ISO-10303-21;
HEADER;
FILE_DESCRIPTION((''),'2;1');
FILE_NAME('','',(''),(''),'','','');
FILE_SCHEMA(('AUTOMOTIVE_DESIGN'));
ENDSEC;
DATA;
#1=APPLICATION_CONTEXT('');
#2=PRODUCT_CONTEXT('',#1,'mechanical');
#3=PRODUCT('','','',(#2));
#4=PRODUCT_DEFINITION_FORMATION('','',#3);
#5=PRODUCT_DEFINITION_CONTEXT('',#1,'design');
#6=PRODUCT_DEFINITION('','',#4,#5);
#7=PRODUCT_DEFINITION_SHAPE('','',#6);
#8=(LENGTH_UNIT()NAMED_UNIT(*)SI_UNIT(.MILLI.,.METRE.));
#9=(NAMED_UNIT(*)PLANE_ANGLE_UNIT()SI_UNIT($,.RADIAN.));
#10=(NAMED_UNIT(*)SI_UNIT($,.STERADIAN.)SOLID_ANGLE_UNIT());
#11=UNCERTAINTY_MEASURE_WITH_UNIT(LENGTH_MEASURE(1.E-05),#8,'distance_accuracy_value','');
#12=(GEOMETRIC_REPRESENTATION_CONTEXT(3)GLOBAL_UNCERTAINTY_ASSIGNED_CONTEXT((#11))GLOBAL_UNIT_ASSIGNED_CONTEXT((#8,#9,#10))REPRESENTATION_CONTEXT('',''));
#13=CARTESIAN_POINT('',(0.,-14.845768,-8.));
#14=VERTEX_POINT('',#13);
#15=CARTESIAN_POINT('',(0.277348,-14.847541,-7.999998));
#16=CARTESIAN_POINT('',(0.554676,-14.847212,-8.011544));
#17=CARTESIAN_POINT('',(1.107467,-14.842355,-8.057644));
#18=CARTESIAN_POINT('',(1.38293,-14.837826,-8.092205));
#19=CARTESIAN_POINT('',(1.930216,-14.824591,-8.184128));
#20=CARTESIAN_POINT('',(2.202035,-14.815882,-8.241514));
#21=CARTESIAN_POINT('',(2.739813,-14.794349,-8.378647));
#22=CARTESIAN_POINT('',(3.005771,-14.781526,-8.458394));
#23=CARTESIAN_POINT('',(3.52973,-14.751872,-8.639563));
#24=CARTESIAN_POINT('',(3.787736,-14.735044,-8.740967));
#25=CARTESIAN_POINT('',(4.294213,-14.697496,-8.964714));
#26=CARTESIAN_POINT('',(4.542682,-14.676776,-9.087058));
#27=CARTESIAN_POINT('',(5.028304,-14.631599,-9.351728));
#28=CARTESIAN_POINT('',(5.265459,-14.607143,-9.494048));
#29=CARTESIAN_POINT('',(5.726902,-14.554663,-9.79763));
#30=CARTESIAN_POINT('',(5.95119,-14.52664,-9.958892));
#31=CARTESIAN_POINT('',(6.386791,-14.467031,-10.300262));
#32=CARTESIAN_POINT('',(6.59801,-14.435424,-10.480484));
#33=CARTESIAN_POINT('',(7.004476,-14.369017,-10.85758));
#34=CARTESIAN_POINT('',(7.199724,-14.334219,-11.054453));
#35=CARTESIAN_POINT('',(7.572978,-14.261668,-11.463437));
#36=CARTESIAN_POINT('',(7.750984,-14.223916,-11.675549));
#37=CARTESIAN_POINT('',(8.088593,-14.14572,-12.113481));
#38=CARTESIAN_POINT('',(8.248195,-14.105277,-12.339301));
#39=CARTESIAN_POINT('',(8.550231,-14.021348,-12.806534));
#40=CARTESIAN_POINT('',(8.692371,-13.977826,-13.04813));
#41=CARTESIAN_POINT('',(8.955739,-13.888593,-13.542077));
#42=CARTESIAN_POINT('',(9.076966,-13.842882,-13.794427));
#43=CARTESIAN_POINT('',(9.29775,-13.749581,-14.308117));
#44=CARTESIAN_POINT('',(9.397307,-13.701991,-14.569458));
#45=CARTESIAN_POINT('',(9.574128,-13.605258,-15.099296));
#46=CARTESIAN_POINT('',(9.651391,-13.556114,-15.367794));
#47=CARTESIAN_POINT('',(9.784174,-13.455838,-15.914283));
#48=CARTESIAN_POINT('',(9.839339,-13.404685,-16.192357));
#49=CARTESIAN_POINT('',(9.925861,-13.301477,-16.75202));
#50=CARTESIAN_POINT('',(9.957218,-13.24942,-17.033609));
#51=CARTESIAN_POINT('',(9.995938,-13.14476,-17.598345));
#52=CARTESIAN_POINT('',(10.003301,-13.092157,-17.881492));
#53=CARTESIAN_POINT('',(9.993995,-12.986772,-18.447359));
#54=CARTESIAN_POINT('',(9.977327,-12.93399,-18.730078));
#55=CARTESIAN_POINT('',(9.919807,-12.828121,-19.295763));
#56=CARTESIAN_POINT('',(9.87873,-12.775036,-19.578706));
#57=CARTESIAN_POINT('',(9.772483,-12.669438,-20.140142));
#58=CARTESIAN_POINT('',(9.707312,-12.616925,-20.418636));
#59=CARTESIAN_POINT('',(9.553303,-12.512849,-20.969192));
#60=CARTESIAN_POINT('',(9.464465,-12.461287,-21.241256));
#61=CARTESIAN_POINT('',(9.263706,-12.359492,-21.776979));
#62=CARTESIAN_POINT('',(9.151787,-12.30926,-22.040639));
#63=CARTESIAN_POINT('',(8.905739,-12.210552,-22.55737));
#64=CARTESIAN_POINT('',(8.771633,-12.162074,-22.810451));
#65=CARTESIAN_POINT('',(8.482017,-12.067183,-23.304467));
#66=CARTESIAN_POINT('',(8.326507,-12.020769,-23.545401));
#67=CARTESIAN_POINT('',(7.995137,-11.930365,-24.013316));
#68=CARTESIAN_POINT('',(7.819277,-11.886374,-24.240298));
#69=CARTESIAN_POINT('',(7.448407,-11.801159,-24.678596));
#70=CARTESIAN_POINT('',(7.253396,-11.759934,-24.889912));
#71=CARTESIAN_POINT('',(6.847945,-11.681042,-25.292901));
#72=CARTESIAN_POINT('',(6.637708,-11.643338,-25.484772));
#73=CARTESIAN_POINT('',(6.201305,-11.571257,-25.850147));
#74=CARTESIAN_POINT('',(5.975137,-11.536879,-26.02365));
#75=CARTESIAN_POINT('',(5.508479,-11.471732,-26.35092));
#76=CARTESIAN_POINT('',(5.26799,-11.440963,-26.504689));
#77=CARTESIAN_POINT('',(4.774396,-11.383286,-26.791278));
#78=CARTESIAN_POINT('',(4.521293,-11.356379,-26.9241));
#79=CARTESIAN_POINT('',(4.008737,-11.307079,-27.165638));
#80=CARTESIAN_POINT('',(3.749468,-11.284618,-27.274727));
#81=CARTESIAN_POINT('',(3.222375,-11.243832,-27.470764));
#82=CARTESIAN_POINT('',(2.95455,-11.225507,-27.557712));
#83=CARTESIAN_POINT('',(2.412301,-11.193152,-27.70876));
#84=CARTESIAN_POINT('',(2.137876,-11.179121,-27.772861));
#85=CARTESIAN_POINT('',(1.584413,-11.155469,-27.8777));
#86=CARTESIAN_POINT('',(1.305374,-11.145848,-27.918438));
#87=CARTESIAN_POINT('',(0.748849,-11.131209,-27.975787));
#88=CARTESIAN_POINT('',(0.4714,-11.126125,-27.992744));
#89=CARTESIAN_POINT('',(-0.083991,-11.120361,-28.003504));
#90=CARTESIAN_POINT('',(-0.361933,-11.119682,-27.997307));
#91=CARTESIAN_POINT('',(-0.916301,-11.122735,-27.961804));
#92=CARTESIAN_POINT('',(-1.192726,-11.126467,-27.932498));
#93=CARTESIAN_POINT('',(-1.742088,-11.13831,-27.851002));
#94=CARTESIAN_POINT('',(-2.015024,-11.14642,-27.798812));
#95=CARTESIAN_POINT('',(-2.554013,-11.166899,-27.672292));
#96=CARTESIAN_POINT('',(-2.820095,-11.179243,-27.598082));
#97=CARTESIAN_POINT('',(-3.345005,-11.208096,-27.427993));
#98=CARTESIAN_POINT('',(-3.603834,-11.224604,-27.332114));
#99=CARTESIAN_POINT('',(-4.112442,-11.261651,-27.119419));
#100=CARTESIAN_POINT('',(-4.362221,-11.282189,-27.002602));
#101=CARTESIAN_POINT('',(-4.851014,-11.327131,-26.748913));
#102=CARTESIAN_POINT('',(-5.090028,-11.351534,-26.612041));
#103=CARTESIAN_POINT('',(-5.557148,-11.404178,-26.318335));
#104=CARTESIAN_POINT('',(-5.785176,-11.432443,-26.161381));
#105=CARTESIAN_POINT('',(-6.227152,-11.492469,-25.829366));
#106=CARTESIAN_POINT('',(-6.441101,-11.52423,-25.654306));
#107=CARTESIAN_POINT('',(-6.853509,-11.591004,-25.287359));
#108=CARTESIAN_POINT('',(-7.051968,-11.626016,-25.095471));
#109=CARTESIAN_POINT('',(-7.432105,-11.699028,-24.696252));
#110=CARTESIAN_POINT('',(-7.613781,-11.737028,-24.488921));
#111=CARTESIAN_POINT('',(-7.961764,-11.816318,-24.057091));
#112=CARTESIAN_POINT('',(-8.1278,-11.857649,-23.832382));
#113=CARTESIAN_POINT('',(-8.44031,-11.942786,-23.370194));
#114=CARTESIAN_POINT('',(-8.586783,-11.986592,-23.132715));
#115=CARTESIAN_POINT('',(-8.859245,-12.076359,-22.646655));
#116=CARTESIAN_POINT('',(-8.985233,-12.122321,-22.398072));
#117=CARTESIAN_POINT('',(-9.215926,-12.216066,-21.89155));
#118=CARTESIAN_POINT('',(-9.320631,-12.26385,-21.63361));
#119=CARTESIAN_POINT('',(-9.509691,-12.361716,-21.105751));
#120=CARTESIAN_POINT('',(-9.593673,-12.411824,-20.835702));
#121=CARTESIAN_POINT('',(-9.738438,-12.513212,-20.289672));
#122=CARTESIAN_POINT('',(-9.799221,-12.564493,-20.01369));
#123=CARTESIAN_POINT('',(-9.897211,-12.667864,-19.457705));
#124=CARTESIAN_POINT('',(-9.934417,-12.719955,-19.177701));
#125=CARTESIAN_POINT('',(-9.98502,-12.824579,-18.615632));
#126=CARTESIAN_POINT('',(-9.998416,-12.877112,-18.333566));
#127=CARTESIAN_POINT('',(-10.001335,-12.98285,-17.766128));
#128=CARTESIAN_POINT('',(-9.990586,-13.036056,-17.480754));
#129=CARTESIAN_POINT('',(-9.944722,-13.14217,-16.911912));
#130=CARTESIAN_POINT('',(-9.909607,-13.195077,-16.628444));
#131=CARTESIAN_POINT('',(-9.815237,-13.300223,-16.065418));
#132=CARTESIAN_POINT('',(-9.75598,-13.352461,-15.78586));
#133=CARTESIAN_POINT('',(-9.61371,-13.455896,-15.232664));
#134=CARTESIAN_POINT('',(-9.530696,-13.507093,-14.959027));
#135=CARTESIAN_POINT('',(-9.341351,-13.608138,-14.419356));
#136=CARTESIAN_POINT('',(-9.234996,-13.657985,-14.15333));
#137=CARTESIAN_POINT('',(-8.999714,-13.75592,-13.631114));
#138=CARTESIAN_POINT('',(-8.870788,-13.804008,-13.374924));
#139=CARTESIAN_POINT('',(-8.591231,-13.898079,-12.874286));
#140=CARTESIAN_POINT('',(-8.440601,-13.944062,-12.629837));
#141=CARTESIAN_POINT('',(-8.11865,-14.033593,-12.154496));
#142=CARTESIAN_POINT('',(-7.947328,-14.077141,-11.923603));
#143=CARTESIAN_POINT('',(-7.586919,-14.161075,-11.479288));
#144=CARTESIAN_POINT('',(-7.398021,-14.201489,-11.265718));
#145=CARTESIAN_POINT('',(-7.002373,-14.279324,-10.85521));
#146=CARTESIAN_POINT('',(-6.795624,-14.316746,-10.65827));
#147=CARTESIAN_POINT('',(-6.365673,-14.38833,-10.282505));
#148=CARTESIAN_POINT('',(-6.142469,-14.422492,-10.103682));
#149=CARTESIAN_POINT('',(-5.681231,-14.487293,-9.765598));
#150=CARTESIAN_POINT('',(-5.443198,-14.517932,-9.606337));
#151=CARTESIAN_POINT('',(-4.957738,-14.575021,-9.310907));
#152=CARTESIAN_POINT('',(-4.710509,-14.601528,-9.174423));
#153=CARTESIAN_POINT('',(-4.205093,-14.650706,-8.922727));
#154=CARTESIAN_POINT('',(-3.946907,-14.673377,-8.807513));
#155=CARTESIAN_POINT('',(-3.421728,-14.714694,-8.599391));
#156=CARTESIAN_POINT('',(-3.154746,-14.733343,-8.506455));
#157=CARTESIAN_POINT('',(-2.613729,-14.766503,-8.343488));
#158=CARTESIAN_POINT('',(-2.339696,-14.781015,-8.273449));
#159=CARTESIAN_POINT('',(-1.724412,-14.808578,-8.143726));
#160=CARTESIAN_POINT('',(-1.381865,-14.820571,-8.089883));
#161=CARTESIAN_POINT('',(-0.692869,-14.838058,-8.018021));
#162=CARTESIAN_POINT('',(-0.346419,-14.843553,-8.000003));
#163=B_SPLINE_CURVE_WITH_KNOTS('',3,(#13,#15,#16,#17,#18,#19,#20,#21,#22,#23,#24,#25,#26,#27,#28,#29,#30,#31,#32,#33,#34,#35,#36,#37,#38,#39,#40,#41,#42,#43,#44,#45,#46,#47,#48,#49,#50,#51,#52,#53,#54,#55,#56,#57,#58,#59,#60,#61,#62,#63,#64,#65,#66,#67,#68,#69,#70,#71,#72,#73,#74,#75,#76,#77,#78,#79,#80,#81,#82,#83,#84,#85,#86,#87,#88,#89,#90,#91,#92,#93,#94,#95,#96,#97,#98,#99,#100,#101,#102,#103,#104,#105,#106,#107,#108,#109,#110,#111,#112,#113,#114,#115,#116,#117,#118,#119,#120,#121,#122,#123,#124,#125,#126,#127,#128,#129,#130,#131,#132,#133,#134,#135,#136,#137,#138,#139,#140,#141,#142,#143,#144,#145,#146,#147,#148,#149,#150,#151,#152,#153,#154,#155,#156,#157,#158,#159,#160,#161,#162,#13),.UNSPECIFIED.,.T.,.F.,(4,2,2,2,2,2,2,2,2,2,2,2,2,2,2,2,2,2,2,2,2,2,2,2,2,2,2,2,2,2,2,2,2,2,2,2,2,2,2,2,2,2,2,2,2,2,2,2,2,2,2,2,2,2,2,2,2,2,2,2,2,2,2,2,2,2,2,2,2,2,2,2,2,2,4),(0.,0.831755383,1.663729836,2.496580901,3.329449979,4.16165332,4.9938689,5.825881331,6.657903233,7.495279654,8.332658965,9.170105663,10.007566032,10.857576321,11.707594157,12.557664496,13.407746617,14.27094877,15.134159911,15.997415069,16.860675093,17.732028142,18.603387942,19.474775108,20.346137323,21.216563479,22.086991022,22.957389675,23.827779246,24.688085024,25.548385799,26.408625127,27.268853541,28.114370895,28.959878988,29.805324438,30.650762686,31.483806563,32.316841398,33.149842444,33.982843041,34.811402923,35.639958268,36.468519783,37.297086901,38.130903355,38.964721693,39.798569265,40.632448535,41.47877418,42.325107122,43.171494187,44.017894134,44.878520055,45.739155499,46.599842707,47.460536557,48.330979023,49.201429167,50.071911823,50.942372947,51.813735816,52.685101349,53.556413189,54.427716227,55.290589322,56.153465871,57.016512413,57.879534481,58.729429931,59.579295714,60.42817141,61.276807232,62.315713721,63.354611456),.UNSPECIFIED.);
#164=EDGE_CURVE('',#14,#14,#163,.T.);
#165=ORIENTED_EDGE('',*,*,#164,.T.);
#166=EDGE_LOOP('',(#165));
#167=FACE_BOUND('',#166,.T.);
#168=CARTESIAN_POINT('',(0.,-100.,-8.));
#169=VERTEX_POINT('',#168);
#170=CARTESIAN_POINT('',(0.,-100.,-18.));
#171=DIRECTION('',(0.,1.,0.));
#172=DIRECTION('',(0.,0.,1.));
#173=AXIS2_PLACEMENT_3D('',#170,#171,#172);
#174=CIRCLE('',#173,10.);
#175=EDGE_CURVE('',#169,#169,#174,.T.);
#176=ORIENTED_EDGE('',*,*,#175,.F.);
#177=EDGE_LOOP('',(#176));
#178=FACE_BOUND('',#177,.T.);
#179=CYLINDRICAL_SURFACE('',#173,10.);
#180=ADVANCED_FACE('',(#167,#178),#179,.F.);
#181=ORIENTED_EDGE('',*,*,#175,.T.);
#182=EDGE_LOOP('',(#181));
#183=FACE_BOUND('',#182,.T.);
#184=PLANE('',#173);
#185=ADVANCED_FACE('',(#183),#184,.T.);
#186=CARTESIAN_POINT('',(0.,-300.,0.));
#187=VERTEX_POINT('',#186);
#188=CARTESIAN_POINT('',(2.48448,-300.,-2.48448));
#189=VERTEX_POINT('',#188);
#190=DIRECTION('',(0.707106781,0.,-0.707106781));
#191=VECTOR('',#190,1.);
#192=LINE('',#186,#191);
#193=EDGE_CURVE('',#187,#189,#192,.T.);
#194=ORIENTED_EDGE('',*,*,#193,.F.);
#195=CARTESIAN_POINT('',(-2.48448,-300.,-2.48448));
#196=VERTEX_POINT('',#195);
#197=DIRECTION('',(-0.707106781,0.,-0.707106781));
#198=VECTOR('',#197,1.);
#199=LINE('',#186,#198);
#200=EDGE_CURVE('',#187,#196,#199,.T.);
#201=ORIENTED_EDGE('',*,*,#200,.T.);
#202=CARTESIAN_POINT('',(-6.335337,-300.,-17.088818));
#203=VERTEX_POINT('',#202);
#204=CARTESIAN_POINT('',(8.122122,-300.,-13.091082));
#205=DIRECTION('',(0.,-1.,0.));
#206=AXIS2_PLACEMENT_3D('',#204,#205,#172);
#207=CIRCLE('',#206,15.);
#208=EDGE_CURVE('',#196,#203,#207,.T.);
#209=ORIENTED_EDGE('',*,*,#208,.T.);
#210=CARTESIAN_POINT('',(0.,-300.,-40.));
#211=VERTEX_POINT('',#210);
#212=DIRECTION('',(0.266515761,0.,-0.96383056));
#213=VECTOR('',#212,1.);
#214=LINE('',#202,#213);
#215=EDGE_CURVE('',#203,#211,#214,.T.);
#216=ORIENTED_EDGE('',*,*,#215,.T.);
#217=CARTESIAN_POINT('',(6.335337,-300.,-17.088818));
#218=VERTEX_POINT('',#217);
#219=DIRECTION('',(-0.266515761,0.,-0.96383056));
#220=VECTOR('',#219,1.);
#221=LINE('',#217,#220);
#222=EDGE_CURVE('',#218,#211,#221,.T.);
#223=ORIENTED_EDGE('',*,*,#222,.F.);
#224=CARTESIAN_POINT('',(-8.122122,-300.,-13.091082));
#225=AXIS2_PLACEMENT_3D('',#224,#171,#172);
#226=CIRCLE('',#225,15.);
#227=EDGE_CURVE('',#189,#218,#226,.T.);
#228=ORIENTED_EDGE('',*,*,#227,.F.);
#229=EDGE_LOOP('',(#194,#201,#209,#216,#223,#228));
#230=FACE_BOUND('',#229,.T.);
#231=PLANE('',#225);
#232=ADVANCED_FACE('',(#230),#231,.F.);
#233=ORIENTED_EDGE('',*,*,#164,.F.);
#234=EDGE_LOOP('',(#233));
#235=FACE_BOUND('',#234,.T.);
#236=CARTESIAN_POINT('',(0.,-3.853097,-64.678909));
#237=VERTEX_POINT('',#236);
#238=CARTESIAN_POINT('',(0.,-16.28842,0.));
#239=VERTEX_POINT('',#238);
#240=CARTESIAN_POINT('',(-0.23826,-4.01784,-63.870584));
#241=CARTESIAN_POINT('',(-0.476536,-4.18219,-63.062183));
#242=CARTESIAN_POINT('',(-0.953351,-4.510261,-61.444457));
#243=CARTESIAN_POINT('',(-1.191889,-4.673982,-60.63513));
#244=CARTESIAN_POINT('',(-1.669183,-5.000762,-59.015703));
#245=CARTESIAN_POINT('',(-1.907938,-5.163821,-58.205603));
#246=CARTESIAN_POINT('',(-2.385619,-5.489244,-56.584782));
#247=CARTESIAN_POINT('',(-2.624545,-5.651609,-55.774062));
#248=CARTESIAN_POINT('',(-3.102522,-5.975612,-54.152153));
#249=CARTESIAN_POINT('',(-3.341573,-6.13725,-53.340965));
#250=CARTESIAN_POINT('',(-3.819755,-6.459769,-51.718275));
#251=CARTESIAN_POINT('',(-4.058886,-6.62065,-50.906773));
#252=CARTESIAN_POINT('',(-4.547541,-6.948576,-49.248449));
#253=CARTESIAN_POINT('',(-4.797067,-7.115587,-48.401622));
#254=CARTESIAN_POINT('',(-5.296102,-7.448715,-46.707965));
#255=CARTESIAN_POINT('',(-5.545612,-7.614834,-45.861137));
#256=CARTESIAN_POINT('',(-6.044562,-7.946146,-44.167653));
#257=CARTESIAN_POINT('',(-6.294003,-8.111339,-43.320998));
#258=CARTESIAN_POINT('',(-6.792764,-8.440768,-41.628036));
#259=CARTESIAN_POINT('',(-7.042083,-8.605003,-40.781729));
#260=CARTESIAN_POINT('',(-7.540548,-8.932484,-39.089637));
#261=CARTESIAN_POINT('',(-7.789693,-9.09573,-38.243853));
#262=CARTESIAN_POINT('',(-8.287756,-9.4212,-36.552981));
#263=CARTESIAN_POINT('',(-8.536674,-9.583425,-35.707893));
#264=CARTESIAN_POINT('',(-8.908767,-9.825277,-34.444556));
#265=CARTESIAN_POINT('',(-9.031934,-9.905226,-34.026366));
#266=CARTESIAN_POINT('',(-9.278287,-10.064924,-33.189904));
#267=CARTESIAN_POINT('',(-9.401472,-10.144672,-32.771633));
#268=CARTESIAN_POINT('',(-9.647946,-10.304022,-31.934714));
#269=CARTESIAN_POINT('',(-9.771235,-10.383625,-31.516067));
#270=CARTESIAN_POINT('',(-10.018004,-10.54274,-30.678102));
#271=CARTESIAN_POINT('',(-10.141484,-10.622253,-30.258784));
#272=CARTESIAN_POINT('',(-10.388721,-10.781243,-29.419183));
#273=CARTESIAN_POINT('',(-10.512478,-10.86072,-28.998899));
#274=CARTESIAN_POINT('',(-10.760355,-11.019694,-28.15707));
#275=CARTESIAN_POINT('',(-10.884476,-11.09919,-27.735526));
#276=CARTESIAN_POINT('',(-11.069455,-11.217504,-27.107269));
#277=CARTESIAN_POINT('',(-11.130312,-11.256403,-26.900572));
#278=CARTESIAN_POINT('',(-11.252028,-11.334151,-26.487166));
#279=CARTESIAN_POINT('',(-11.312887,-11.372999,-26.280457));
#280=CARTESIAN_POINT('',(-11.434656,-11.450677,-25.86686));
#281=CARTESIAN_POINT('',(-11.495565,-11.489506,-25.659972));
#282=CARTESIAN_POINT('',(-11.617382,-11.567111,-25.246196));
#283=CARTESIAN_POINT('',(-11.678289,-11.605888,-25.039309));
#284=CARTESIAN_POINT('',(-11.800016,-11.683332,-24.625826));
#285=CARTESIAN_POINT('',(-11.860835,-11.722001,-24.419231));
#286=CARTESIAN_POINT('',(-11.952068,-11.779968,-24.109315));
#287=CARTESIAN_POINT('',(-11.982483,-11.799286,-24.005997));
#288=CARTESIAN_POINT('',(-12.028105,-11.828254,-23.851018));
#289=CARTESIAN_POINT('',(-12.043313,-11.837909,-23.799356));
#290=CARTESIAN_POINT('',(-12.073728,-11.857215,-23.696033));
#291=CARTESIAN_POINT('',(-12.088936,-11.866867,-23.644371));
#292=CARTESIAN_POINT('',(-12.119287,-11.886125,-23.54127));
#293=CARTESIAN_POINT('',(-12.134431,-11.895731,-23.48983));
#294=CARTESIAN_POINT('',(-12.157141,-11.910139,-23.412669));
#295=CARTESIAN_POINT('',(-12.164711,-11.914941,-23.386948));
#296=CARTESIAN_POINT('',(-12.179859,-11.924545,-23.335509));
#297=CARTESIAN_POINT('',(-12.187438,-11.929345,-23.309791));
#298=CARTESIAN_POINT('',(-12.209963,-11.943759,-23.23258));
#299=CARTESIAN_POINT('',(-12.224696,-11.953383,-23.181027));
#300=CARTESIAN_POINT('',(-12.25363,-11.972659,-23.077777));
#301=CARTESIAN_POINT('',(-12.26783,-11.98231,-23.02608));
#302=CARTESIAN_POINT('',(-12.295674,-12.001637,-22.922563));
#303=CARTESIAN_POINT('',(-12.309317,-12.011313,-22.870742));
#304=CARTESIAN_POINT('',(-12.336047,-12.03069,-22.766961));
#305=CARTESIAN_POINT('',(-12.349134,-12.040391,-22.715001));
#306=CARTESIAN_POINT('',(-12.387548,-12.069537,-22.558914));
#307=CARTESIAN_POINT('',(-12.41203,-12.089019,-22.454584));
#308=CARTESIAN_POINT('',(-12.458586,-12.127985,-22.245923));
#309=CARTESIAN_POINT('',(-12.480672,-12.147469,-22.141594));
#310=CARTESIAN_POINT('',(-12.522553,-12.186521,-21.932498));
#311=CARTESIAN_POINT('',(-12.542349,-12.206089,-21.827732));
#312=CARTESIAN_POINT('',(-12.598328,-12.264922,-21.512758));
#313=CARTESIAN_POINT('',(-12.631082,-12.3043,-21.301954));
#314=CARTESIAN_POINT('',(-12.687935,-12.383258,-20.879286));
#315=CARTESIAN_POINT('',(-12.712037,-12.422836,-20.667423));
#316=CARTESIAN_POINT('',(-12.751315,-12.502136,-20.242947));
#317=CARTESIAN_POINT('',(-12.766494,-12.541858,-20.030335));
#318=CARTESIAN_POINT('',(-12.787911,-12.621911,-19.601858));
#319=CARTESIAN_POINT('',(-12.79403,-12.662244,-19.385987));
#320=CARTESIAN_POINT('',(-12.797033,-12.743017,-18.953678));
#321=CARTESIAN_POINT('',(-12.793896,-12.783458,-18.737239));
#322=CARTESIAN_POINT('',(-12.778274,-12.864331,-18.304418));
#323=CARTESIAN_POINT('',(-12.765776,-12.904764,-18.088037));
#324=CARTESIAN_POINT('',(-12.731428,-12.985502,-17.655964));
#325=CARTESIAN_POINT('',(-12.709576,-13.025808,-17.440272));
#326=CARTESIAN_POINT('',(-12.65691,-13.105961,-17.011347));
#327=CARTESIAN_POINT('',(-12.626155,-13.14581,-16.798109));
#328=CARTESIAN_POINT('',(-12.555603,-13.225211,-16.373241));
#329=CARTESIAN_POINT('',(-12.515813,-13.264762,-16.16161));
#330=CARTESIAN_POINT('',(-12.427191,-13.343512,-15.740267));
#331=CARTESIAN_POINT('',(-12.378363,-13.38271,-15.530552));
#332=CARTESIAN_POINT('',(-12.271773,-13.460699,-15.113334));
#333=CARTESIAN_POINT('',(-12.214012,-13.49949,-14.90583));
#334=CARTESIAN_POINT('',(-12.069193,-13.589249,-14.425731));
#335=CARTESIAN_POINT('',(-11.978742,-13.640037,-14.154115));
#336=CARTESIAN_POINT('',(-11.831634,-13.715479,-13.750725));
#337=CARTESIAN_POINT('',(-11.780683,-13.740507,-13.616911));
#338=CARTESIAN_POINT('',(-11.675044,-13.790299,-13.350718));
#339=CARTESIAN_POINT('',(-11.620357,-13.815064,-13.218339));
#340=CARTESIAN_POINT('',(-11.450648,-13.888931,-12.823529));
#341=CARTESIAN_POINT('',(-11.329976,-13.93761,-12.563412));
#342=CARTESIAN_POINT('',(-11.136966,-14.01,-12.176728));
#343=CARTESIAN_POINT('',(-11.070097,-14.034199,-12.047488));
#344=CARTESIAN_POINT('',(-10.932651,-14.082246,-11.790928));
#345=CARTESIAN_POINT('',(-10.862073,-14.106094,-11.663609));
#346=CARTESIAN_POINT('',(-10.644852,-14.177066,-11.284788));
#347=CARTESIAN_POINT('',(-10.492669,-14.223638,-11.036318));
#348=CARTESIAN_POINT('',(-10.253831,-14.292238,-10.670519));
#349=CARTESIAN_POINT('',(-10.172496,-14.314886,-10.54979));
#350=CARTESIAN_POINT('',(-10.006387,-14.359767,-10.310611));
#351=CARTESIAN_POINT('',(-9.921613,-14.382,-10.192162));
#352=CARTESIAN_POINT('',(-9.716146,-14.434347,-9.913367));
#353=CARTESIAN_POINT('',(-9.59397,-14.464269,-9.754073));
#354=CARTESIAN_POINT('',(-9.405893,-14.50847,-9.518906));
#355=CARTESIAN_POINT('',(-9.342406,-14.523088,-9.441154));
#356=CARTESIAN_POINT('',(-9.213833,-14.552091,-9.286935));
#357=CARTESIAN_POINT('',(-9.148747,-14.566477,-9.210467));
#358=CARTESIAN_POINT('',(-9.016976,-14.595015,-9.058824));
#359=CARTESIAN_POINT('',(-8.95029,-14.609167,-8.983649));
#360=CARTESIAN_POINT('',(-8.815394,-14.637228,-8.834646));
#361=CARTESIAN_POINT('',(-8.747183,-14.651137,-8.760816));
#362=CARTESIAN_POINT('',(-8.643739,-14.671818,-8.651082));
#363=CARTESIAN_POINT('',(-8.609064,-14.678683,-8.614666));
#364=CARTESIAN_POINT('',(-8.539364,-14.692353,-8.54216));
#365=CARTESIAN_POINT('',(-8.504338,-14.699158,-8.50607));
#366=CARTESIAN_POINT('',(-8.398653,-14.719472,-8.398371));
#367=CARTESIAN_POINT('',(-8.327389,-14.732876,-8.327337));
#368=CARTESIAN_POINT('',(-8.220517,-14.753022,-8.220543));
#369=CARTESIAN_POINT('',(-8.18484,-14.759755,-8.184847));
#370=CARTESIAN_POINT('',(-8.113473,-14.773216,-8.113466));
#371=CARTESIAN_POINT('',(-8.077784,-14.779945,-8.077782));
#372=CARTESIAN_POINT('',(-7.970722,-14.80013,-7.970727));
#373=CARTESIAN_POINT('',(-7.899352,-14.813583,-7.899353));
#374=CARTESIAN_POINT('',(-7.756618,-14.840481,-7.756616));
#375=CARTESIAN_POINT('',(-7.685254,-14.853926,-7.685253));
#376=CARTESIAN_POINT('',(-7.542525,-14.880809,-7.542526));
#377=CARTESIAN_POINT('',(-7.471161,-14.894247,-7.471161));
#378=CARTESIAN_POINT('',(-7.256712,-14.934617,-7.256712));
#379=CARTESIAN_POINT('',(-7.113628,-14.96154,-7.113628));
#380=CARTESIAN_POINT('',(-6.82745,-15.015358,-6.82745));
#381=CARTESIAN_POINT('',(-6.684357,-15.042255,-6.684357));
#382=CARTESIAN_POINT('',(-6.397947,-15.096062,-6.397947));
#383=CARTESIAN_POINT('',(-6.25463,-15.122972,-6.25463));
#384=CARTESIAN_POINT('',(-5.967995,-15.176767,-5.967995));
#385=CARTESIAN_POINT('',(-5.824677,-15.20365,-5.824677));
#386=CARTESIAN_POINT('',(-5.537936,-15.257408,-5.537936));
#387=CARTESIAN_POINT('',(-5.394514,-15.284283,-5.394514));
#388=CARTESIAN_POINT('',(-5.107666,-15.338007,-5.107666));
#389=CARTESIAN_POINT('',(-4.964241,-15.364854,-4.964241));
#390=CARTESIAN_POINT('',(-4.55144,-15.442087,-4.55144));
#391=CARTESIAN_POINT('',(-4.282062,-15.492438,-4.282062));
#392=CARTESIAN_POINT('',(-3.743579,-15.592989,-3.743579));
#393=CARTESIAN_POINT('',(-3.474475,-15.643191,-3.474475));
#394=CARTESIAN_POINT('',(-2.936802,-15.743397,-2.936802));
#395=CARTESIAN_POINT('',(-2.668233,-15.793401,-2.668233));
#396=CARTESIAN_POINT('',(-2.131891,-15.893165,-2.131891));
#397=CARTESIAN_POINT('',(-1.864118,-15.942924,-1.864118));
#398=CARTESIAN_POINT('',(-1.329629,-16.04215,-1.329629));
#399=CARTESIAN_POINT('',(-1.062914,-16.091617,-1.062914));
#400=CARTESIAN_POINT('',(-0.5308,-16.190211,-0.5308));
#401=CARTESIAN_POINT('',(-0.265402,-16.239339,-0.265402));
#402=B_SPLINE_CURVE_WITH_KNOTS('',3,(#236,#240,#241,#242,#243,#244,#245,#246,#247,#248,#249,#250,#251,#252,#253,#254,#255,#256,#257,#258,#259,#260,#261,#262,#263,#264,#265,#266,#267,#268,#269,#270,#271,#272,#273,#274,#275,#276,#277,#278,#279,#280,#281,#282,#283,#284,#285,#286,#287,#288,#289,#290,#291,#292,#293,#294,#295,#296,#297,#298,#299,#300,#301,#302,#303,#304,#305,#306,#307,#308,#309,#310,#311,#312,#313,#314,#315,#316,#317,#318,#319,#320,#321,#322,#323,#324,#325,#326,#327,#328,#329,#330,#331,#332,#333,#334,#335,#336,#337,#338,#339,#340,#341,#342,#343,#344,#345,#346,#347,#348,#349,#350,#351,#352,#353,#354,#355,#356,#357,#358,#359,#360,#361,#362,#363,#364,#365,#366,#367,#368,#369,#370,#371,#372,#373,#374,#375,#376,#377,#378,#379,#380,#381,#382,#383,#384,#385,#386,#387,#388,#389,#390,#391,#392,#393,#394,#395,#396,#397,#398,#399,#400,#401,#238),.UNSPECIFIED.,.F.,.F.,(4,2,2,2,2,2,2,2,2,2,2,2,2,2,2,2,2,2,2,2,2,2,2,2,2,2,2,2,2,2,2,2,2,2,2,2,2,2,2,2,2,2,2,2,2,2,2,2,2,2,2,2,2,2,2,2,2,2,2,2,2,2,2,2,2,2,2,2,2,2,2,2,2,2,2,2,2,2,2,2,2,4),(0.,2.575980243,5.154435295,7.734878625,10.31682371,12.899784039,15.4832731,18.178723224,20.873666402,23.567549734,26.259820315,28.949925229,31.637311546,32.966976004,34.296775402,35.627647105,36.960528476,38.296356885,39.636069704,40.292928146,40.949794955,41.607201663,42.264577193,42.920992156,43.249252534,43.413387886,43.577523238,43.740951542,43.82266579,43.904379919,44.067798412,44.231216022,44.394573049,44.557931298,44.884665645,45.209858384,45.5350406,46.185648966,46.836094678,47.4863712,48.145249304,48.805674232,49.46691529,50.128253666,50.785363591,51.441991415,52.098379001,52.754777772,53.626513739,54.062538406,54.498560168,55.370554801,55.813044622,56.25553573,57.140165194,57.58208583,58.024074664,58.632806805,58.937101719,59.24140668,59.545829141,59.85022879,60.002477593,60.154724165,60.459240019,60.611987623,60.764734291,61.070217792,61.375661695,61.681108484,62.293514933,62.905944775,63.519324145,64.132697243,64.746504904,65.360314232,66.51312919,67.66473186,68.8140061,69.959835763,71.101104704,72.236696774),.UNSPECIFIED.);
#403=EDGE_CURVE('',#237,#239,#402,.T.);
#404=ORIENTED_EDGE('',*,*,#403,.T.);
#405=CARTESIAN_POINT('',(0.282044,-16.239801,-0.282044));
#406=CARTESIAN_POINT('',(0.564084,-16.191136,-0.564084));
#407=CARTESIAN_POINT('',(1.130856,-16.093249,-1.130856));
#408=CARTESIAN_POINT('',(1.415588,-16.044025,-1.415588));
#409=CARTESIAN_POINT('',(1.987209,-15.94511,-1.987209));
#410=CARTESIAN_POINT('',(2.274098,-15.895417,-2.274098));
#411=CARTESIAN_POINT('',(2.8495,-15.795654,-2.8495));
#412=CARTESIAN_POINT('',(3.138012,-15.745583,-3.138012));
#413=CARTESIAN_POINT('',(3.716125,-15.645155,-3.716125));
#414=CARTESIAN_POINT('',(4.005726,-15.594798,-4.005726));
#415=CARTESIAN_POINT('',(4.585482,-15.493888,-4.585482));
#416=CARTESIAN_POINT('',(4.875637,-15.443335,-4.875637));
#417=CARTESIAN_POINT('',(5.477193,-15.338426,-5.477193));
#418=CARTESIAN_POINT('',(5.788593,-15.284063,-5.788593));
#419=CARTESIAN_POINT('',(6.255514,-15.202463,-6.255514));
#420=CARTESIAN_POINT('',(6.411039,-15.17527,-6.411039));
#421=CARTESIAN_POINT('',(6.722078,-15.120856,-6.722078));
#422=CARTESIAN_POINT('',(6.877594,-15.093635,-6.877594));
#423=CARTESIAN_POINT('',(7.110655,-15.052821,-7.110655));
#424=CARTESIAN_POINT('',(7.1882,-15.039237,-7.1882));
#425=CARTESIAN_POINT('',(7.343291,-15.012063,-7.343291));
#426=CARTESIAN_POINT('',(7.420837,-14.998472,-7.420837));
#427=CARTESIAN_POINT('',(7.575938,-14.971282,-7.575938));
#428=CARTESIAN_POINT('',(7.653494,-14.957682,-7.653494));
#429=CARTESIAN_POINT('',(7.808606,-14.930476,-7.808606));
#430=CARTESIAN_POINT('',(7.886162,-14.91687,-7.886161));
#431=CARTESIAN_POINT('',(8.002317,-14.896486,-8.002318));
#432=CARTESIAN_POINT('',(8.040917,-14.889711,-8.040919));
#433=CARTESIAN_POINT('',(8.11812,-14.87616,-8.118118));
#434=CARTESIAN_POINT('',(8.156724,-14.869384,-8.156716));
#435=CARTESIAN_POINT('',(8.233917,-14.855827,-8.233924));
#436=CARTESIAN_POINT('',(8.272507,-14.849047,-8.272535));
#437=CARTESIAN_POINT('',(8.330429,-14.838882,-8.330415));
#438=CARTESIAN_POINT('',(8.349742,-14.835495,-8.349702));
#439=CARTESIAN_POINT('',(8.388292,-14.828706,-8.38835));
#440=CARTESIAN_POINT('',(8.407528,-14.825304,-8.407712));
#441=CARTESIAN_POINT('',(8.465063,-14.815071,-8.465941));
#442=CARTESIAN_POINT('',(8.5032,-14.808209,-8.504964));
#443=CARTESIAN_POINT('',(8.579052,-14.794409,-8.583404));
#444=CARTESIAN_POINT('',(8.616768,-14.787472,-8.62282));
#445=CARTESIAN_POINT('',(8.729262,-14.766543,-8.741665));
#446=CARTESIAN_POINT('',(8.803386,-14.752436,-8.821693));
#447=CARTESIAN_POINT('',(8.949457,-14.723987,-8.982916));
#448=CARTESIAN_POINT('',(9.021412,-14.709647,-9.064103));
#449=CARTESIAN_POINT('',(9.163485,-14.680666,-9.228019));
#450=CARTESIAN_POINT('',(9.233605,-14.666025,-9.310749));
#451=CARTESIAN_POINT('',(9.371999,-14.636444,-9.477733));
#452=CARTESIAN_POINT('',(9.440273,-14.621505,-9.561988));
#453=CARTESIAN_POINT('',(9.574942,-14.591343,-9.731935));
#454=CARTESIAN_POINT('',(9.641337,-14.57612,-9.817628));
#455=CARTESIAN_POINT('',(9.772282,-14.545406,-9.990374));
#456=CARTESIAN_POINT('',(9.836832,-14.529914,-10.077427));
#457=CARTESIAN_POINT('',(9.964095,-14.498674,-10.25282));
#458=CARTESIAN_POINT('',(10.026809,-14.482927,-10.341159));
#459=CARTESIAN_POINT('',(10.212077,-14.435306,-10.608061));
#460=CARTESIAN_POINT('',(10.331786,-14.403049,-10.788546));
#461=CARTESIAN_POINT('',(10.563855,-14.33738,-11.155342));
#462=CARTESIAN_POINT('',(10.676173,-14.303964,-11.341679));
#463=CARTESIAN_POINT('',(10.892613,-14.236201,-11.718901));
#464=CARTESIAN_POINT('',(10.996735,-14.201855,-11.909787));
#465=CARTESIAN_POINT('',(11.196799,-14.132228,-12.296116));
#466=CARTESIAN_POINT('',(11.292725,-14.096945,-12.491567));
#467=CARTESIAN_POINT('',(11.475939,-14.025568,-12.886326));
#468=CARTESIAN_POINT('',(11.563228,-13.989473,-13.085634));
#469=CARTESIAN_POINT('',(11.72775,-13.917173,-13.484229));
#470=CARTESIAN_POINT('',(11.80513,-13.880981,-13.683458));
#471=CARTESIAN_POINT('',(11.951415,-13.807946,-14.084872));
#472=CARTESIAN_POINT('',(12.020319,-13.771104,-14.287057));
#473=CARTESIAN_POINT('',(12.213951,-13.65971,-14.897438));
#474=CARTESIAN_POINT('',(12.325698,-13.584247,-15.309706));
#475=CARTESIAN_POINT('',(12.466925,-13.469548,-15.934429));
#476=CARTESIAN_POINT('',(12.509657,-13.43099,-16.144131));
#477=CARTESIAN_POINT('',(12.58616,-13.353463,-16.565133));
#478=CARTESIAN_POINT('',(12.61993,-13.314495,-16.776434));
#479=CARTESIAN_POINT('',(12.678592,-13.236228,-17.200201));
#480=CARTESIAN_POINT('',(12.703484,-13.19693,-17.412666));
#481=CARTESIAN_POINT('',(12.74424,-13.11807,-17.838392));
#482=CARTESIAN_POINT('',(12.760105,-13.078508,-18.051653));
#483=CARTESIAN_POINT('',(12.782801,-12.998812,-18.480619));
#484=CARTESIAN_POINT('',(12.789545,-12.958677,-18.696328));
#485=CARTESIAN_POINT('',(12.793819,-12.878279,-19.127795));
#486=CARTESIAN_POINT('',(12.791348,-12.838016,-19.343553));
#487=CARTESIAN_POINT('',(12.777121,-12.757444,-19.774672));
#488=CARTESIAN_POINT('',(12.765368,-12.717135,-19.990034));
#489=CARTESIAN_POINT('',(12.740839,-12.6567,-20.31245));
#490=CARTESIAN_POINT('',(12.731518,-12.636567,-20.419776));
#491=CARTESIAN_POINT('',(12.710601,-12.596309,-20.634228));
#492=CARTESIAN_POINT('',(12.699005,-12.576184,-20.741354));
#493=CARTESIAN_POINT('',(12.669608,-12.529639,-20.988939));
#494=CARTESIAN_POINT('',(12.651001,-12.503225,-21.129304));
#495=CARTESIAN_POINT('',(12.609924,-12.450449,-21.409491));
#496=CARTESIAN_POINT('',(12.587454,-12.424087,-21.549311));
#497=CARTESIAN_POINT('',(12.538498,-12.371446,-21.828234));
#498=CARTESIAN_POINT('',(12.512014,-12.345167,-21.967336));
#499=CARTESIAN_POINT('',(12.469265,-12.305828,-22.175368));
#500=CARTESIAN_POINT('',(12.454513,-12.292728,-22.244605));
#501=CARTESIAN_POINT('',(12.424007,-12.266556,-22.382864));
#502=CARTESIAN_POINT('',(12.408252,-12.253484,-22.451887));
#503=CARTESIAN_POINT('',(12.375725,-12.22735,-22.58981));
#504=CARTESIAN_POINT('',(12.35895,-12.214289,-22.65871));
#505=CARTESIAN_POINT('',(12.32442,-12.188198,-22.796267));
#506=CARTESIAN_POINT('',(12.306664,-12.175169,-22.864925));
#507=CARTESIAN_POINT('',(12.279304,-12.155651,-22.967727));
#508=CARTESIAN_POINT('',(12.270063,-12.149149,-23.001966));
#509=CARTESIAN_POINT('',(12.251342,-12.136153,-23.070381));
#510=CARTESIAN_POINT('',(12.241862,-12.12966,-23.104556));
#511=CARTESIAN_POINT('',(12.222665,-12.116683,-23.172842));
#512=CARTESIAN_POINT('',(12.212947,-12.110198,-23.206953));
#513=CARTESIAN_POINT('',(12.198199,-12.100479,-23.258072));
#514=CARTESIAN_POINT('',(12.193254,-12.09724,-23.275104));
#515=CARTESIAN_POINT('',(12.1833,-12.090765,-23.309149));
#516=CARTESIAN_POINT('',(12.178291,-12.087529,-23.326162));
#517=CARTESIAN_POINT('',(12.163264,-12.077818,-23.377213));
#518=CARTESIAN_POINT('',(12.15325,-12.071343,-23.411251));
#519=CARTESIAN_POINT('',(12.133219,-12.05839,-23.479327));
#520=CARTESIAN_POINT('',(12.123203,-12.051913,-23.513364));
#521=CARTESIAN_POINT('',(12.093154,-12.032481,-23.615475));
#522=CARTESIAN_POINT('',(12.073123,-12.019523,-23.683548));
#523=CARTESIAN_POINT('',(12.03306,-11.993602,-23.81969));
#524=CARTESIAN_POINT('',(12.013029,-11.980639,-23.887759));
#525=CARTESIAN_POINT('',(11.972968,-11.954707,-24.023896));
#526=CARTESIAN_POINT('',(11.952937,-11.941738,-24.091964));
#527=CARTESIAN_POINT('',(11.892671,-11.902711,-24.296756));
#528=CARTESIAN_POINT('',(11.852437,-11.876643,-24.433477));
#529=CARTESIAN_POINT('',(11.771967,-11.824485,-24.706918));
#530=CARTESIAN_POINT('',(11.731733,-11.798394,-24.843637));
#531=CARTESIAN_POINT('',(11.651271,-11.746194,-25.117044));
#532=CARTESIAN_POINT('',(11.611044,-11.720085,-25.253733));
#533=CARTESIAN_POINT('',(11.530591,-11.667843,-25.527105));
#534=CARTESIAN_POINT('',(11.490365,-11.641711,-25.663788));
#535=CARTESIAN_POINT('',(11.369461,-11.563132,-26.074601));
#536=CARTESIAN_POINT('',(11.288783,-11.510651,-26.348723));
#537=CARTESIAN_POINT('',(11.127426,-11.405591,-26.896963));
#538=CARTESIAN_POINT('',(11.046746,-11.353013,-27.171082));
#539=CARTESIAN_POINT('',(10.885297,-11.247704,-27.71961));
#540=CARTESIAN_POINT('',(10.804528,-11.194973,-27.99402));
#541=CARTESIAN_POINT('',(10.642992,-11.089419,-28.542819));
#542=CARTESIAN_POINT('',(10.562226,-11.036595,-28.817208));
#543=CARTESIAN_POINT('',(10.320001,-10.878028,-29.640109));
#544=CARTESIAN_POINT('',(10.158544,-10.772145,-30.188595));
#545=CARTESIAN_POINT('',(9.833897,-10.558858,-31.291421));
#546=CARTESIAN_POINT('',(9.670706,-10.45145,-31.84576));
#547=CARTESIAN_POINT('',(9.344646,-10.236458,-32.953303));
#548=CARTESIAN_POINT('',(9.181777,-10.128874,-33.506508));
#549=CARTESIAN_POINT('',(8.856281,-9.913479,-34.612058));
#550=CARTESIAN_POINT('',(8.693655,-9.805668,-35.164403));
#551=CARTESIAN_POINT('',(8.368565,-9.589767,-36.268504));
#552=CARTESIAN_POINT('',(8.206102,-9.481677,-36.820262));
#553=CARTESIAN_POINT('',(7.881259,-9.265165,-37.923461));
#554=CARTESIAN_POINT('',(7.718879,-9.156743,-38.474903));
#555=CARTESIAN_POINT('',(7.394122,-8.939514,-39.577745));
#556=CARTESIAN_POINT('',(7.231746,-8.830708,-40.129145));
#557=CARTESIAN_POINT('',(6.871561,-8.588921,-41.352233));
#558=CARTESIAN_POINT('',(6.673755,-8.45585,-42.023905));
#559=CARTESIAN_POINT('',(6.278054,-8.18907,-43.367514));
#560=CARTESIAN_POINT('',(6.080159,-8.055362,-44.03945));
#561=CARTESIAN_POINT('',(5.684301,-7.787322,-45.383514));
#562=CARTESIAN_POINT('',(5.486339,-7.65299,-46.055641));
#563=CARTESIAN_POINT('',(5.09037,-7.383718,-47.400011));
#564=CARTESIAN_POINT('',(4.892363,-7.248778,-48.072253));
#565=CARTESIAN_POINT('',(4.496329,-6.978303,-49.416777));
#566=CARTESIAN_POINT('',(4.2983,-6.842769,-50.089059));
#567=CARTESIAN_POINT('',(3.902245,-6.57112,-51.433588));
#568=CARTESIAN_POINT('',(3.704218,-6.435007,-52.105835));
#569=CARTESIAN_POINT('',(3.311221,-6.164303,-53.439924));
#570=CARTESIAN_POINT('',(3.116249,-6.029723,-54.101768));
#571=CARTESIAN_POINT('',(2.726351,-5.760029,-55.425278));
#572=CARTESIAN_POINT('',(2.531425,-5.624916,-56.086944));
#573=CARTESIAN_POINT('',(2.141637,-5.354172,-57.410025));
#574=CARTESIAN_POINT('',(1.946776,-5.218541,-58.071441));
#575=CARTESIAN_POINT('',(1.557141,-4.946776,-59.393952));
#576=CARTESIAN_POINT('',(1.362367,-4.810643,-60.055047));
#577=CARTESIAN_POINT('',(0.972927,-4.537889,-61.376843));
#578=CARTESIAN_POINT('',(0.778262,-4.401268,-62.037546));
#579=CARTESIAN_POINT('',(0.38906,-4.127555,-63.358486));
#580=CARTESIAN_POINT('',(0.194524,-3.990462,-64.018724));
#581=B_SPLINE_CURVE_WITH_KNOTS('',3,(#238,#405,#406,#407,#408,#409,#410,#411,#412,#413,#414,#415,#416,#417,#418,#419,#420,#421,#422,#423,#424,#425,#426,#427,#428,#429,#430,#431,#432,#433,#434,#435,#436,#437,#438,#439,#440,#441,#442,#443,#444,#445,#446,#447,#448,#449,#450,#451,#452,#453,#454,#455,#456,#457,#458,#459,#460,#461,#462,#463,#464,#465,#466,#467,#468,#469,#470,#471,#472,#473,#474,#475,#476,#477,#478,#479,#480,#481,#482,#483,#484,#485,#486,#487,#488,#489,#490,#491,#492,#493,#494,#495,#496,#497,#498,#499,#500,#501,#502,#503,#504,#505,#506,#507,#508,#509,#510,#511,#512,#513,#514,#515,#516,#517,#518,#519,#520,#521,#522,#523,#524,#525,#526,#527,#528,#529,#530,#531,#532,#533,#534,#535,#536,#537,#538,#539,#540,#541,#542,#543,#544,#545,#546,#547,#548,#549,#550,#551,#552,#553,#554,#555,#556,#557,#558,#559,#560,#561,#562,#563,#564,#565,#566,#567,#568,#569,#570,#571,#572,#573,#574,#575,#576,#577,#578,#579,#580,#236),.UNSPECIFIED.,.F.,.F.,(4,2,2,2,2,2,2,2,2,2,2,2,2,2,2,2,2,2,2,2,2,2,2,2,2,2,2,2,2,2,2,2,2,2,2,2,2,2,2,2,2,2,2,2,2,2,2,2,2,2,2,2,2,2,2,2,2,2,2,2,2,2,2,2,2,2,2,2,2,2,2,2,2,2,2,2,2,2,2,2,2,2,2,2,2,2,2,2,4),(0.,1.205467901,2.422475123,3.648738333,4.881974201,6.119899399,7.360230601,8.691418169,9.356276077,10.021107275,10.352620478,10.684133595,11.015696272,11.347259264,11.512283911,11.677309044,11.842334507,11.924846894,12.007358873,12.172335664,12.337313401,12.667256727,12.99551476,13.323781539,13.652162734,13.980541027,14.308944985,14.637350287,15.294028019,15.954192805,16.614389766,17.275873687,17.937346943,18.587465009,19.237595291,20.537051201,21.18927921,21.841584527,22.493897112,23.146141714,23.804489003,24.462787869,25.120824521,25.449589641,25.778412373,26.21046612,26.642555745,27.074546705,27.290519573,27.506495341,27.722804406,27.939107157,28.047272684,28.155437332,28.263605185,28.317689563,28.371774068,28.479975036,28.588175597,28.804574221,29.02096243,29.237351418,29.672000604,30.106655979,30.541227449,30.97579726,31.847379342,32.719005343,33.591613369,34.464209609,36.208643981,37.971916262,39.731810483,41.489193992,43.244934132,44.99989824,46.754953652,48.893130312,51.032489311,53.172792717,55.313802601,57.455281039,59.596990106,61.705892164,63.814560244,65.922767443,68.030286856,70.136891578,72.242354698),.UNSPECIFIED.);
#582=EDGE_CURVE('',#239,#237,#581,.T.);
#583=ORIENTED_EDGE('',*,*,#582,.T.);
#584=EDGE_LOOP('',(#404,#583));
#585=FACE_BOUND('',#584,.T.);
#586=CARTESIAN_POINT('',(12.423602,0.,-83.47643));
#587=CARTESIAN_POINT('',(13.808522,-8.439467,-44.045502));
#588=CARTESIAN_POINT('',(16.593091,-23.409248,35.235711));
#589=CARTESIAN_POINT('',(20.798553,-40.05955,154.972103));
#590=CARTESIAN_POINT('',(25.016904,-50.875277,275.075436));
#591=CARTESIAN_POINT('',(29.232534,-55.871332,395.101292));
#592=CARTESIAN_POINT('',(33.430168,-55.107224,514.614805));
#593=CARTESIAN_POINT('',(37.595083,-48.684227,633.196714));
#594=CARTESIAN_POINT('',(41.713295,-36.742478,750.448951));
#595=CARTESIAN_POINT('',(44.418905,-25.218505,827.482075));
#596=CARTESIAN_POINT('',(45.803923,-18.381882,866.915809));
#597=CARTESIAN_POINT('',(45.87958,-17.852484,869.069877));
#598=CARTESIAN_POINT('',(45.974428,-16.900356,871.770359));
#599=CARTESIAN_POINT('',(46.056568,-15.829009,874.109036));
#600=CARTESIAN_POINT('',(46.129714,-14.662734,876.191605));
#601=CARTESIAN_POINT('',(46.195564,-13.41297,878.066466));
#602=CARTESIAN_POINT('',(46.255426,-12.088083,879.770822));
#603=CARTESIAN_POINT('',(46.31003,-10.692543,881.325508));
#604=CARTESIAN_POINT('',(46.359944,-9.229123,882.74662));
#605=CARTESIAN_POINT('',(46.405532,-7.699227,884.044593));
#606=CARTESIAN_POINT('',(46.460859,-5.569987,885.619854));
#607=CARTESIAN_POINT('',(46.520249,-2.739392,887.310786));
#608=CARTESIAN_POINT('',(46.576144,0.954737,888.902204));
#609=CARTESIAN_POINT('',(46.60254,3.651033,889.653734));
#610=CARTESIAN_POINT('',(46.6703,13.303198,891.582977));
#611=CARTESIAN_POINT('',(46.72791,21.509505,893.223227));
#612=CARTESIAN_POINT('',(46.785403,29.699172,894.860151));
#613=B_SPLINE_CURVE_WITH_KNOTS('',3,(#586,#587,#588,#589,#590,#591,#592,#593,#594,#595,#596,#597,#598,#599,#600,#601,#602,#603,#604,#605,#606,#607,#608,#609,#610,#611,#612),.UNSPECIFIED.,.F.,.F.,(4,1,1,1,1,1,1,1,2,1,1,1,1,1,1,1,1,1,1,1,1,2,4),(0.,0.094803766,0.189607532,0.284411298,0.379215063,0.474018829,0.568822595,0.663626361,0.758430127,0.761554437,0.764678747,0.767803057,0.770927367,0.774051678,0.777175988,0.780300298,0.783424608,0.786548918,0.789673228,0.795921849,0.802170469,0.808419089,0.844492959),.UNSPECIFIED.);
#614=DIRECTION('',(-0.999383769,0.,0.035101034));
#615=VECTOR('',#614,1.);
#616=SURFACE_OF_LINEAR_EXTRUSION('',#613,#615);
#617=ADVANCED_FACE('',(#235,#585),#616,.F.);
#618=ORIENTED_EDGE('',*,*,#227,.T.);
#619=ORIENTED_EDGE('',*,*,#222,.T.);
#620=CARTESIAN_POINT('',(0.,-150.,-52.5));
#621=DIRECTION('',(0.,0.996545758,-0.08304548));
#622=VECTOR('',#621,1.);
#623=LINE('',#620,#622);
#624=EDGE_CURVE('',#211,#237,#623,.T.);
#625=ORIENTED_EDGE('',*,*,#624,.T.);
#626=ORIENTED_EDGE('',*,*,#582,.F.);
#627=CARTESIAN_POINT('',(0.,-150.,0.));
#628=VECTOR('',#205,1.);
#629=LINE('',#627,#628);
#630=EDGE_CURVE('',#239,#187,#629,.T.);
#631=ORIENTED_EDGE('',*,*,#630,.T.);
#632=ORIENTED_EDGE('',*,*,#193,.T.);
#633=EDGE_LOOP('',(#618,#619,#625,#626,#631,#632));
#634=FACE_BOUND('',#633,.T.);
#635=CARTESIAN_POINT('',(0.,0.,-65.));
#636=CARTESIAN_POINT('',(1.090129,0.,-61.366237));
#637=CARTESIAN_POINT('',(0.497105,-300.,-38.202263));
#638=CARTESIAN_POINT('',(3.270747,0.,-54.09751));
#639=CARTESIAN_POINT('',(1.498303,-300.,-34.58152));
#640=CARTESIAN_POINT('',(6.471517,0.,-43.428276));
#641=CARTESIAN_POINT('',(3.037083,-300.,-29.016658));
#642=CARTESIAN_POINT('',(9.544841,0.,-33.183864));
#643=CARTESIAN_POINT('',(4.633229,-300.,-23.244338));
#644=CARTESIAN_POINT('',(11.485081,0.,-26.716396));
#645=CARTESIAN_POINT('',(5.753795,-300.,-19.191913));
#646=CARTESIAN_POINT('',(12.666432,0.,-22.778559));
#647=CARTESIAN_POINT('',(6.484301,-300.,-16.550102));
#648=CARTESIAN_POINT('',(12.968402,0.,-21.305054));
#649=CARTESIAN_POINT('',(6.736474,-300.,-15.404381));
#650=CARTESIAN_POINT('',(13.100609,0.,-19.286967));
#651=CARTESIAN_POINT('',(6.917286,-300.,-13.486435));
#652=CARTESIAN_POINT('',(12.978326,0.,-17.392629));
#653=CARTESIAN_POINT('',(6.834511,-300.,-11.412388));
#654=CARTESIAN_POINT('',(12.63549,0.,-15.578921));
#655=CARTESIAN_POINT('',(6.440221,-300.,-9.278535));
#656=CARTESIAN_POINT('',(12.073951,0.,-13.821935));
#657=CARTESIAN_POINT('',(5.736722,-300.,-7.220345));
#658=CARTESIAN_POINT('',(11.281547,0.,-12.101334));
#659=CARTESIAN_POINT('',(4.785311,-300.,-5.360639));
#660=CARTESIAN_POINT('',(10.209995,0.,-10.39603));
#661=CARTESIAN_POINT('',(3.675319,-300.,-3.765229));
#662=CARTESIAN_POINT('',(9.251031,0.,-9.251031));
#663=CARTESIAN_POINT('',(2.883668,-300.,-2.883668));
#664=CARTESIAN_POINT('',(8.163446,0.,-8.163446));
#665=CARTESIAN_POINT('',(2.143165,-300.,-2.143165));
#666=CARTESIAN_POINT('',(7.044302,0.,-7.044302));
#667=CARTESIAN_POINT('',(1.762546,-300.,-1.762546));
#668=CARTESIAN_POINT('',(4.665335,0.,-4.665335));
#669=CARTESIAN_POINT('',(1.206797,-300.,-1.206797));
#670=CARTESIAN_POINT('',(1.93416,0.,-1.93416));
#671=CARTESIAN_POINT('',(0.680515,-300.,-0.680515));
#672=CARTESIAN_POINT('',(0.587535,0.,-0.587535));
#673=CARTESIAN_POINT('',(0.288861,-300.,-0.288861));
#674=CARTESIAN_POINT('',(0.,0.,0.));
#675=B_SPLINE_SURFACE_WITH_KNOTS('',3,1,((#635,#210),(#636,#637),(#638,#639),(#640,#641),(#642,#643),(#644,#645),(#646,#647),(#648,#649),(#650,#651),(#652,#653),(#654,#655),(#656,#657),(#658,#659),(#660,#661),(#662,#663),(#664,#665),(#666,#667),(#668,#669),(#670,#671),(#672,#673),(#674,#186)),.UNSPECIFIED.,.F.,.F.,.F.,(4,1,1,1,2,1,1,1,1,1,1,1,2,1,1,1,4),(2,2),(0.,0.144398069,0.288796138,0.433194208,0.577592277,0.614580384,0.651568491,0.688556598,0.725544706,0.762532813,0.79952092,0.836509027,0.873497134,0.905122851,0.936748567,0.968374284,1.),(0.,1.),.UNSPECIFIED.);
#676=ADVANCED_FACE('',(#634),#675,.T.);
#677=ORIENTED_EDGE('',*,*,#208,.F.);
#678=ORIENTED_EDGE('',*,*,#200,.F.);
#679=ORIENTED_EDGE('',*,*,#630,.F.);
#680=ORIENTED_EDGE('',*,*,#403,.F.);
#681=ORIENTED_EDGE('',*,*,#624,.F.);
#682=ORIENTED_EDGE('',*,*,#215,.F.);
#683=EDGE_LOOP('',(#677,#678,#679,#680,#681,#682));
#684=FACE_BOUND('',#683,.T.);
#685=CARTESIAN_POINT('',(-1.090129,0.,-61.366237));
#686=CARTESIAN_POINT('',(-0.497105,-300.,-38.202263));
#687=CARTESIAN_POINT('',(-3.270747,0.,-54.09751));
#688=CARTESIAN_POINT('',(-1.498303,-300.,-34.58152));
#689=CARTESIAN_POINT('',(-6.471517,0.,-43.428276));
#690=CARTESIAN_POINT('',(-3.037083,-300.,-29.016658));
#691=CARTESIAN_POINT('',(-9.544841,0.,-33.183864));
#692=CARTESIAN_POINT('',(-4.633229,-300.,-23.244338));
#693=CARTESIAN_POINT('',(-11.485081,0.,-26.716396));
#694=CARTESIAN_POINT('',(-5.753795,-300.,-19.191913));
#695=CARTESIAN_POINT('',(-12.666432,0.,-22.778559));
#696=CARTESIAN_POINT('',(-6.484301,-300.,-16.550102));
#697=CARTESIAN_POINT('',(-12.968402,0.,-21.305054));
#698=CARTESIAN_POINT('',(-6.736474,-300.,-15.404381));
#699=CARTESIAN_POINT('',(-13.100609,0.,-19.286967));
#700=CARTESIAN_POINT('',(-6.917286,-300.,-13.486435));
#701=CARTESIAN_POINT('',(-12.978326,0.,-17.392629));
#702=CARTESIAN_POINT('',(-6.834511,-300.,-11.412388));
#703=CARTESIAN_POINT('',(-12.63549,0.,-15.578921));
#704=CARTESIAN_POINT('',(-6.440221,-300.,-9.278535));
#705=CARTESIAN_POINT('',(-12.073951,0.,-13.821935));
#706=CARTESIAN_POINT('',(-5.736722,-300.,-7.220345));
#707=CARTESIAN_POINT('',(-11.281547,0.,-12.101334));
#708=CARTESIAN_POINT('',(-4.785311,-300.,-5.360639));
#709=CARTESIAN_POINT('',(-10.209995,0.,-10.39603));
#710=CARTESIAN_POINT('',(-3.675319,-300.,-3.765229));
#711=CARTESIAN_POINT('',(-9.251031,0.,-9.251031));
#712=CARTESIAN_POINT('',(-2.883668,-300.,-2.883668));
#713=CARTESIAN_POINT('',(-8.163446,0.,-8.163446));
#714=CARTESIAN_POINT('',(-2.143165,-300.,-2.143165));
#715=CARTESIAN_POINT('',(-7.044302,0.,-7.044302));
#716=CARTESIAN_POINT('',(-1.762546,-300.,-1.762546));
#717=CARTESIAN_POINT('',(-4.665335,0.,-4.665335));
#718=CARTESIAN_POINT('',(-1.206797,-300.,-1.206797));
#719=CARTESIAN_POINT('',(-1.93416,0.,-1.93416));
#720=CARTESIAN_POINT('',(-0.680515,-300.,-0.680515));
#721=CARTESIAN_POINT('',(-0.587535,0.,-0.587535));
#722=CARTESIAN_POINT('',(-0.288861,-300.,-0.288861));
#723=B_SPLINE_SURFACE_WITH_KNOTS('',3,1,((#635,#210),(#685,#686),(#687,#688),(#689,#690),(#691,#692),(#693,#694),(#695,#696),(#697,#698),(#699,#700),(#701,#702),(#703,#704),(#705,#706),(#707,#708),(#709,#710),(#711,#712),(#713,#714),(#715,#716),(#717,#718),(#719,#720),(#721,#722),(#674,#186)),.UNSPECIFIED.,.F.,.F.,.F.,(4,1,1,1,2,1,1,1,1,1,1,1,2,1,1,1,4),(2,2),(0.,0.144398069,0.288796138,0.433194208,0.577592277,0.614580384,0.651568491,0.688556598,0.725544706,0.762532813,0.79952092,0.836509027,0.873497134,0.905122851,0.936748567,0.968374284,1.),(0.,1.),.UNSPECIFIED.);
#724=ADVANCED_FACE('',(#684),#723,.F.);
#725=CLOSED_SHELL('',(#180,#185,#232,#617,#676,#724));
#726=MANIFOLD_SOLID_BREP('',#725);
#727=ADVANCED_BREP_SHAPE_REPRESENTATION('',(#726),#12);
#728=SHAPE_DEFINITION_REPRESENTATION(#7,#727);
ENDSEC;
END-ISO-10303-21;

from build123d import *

# Parameters (mm, degrees)
POST_HOLE_R             = 10
CUT_EXTRUDE1_DEPTH      = 100
CUT_EXTRUDE2_DEPTH      = 244.732583295
CUT_EXTRUDE2_DEPTH_BACK = 244.732583295


with BuildPart() as part:
    # Loft1: read off the stored shape, not the designer's step
    # Loft1: loft between two sections, ruled curve by curve
    loft1_from = [
        Edge.make_bspline([(0, 0, -65), (1.090128751, 0, -61.366237497), (3.270747147, 0, -54.097509509), (6.471517091, 0, -43.428276362), (9.544840896, 0, -33.183863681), (11.485081194, 0, -26.716396019), (12.666432162, 0, -22.77855946), (12.968402106, 0, -21.305053815), (13.100609282, 0, -19.286967133), (12.978325762, 0, -17.392629287), (12.635490493, 0, -15.578921438), (12.073950502, 0, -13.82193497), (11.281547245, 0, -12.101334039), (10.209994947, 0, -10.396029742), (9.25103095, 0, -9.25103095), (8.163446408, 0, -8.163446408), (7.044301694, 0, -7.044301694), (4.665334779, 0, -4.665334779), (1.934160234, 0, -1.934160234), (0.587535045, 0, -0.587535045), (0, 0, 0)], [0, 0, 0, 0, 0.144398069, 0.288796138, 0.433194208, 0.577592277, 0.577592277, 0.614580384, 0.651568491, 0.688556598, 0.725544706, 0.762532813, 0.79952092, 0.836509027, 0.873497134, 0.873497134, 0.905122851, 0.936748567, 0.968374284, 1, 1, 1, 1], 3),
        Edge.make_line((0, 0, -65), (0, 0, 0)),
    ]
    loft1_to = [
        Edge.make_bspline([(0, -300, -40), (0.497105388, -300, -38.202262552), (1.498303235, -300, -34.581519535), (3.037083349, -300, -29.016658037), (4.633229436, -300, -23.244337598), (5.753794564, -300, -19.191913419), (6.484300851, -300, -16.550102367), (6.736474062, -300, -15.404380913), (6.917285676, -300, -13.486434812), (6.834511282, -300, -11.412388499), (6.44022099, -300, -9.278535319), (5.736721859, -300, -7.220345405), (4.785310579, -300, -5.360639369), (3.675318905, -300, -3.765229265), (2.883667943, -300, -2.883667943), (2.143164712, -300, -2.143164712), (1.762545696, -300, -1.762545696), (1.206796855, -300, -1.206796855), (0.680514831, -300, -0.680514831), (0.288861433, -300, -0.288861433), (0, -300, 0)], [0, 0, 0, 0, 0.144398069, 0.288796138, 0.433194208, 0.577592277, 0.577592277, 0.614580384, 0.651568491, 0.688556598, 0.725544706, 0.762532813, 0.79952092, 0.836509027, 0.873497134, 0.873497134, 0.905122851, 0.936748567, 0.968374284, 1, 1, 1, 1], 3),
        Edge.make_line((0, -300, -40), (0, -300, 0)),
    ]
    loft1 = Solid(Shell([*[Face.make_surface_from_curves(loft1_from[k], loft1_to[k]) for k in range(2)], Face(Wire(loft1_from)), Face(Wire(loft1_to))]))
    add(loft1)

    # Mirror1: Loft1 across plane
    add(loft1.mirror(Plane.ZY))

    # post_hole → Cut-Extrude1 (cut)
    with BuildSketch(Plane(origin=(0, 0, 0), x_dir=(1, 0, 0), z_dir=(0, 1, 0))):
        with Locations(Location((0, 18, 0), (0, 0, 270))):
            Circle(POST_HOLE_R)
    extrude(amount=-CUT_EXTRUDE1_DEPTH, mode=Mode.SUBTRACT)

    # Sketch1 → Cut-Extrude2 (cut, two sides: drawn at the far end of the back side and taken through both)
    with BuildSketch(Plane(origin=(-1.395234412, -236.356805311, -57.724602067), x_dir=(0.03510103444042518, 0, 0.9993837688201725), z_dir=(-0.9993837688201725, 0, 0.03510103444042518)).offset(-CUT_EXTRUDE2_DEPTH_BACK)):
        with BuildLine():
            Line((-6.901046872, 232.503708167), (-7.221940435, 236.356805311))
            Line((-7.221940435, 236.356805311), (34.607125692, 236.356805311))
            Line((34.607125692, 236.356805311), (49.382745775, 236.356805311))
            Line((49.382745775, 236.356805311), (57.738004539, 236.356805311))
            Line((57.738004539, 236.356805311), (57.738004539, 220.068385372))
            add(Edge.make_bspline(
                [(-6.901046872, 232.503708167), (14.59060476, 228.075000406), (36.140920736, 223.929205599), (57.738004539, 220.068385372)],
                knots=[0.014685246, 0.014685246, 0.014685246, 0.014685246, 0.066243156, 0.066243156, 0.066243156, 0.066243156], degree=3))
        make_face()
    extrude(amount=CUT_EXTRUDE2_DEPTH + CUT_EXTRUDE2_DEPTH_BACK, mode=Mode.SUBTRACT)


solid = part.part
